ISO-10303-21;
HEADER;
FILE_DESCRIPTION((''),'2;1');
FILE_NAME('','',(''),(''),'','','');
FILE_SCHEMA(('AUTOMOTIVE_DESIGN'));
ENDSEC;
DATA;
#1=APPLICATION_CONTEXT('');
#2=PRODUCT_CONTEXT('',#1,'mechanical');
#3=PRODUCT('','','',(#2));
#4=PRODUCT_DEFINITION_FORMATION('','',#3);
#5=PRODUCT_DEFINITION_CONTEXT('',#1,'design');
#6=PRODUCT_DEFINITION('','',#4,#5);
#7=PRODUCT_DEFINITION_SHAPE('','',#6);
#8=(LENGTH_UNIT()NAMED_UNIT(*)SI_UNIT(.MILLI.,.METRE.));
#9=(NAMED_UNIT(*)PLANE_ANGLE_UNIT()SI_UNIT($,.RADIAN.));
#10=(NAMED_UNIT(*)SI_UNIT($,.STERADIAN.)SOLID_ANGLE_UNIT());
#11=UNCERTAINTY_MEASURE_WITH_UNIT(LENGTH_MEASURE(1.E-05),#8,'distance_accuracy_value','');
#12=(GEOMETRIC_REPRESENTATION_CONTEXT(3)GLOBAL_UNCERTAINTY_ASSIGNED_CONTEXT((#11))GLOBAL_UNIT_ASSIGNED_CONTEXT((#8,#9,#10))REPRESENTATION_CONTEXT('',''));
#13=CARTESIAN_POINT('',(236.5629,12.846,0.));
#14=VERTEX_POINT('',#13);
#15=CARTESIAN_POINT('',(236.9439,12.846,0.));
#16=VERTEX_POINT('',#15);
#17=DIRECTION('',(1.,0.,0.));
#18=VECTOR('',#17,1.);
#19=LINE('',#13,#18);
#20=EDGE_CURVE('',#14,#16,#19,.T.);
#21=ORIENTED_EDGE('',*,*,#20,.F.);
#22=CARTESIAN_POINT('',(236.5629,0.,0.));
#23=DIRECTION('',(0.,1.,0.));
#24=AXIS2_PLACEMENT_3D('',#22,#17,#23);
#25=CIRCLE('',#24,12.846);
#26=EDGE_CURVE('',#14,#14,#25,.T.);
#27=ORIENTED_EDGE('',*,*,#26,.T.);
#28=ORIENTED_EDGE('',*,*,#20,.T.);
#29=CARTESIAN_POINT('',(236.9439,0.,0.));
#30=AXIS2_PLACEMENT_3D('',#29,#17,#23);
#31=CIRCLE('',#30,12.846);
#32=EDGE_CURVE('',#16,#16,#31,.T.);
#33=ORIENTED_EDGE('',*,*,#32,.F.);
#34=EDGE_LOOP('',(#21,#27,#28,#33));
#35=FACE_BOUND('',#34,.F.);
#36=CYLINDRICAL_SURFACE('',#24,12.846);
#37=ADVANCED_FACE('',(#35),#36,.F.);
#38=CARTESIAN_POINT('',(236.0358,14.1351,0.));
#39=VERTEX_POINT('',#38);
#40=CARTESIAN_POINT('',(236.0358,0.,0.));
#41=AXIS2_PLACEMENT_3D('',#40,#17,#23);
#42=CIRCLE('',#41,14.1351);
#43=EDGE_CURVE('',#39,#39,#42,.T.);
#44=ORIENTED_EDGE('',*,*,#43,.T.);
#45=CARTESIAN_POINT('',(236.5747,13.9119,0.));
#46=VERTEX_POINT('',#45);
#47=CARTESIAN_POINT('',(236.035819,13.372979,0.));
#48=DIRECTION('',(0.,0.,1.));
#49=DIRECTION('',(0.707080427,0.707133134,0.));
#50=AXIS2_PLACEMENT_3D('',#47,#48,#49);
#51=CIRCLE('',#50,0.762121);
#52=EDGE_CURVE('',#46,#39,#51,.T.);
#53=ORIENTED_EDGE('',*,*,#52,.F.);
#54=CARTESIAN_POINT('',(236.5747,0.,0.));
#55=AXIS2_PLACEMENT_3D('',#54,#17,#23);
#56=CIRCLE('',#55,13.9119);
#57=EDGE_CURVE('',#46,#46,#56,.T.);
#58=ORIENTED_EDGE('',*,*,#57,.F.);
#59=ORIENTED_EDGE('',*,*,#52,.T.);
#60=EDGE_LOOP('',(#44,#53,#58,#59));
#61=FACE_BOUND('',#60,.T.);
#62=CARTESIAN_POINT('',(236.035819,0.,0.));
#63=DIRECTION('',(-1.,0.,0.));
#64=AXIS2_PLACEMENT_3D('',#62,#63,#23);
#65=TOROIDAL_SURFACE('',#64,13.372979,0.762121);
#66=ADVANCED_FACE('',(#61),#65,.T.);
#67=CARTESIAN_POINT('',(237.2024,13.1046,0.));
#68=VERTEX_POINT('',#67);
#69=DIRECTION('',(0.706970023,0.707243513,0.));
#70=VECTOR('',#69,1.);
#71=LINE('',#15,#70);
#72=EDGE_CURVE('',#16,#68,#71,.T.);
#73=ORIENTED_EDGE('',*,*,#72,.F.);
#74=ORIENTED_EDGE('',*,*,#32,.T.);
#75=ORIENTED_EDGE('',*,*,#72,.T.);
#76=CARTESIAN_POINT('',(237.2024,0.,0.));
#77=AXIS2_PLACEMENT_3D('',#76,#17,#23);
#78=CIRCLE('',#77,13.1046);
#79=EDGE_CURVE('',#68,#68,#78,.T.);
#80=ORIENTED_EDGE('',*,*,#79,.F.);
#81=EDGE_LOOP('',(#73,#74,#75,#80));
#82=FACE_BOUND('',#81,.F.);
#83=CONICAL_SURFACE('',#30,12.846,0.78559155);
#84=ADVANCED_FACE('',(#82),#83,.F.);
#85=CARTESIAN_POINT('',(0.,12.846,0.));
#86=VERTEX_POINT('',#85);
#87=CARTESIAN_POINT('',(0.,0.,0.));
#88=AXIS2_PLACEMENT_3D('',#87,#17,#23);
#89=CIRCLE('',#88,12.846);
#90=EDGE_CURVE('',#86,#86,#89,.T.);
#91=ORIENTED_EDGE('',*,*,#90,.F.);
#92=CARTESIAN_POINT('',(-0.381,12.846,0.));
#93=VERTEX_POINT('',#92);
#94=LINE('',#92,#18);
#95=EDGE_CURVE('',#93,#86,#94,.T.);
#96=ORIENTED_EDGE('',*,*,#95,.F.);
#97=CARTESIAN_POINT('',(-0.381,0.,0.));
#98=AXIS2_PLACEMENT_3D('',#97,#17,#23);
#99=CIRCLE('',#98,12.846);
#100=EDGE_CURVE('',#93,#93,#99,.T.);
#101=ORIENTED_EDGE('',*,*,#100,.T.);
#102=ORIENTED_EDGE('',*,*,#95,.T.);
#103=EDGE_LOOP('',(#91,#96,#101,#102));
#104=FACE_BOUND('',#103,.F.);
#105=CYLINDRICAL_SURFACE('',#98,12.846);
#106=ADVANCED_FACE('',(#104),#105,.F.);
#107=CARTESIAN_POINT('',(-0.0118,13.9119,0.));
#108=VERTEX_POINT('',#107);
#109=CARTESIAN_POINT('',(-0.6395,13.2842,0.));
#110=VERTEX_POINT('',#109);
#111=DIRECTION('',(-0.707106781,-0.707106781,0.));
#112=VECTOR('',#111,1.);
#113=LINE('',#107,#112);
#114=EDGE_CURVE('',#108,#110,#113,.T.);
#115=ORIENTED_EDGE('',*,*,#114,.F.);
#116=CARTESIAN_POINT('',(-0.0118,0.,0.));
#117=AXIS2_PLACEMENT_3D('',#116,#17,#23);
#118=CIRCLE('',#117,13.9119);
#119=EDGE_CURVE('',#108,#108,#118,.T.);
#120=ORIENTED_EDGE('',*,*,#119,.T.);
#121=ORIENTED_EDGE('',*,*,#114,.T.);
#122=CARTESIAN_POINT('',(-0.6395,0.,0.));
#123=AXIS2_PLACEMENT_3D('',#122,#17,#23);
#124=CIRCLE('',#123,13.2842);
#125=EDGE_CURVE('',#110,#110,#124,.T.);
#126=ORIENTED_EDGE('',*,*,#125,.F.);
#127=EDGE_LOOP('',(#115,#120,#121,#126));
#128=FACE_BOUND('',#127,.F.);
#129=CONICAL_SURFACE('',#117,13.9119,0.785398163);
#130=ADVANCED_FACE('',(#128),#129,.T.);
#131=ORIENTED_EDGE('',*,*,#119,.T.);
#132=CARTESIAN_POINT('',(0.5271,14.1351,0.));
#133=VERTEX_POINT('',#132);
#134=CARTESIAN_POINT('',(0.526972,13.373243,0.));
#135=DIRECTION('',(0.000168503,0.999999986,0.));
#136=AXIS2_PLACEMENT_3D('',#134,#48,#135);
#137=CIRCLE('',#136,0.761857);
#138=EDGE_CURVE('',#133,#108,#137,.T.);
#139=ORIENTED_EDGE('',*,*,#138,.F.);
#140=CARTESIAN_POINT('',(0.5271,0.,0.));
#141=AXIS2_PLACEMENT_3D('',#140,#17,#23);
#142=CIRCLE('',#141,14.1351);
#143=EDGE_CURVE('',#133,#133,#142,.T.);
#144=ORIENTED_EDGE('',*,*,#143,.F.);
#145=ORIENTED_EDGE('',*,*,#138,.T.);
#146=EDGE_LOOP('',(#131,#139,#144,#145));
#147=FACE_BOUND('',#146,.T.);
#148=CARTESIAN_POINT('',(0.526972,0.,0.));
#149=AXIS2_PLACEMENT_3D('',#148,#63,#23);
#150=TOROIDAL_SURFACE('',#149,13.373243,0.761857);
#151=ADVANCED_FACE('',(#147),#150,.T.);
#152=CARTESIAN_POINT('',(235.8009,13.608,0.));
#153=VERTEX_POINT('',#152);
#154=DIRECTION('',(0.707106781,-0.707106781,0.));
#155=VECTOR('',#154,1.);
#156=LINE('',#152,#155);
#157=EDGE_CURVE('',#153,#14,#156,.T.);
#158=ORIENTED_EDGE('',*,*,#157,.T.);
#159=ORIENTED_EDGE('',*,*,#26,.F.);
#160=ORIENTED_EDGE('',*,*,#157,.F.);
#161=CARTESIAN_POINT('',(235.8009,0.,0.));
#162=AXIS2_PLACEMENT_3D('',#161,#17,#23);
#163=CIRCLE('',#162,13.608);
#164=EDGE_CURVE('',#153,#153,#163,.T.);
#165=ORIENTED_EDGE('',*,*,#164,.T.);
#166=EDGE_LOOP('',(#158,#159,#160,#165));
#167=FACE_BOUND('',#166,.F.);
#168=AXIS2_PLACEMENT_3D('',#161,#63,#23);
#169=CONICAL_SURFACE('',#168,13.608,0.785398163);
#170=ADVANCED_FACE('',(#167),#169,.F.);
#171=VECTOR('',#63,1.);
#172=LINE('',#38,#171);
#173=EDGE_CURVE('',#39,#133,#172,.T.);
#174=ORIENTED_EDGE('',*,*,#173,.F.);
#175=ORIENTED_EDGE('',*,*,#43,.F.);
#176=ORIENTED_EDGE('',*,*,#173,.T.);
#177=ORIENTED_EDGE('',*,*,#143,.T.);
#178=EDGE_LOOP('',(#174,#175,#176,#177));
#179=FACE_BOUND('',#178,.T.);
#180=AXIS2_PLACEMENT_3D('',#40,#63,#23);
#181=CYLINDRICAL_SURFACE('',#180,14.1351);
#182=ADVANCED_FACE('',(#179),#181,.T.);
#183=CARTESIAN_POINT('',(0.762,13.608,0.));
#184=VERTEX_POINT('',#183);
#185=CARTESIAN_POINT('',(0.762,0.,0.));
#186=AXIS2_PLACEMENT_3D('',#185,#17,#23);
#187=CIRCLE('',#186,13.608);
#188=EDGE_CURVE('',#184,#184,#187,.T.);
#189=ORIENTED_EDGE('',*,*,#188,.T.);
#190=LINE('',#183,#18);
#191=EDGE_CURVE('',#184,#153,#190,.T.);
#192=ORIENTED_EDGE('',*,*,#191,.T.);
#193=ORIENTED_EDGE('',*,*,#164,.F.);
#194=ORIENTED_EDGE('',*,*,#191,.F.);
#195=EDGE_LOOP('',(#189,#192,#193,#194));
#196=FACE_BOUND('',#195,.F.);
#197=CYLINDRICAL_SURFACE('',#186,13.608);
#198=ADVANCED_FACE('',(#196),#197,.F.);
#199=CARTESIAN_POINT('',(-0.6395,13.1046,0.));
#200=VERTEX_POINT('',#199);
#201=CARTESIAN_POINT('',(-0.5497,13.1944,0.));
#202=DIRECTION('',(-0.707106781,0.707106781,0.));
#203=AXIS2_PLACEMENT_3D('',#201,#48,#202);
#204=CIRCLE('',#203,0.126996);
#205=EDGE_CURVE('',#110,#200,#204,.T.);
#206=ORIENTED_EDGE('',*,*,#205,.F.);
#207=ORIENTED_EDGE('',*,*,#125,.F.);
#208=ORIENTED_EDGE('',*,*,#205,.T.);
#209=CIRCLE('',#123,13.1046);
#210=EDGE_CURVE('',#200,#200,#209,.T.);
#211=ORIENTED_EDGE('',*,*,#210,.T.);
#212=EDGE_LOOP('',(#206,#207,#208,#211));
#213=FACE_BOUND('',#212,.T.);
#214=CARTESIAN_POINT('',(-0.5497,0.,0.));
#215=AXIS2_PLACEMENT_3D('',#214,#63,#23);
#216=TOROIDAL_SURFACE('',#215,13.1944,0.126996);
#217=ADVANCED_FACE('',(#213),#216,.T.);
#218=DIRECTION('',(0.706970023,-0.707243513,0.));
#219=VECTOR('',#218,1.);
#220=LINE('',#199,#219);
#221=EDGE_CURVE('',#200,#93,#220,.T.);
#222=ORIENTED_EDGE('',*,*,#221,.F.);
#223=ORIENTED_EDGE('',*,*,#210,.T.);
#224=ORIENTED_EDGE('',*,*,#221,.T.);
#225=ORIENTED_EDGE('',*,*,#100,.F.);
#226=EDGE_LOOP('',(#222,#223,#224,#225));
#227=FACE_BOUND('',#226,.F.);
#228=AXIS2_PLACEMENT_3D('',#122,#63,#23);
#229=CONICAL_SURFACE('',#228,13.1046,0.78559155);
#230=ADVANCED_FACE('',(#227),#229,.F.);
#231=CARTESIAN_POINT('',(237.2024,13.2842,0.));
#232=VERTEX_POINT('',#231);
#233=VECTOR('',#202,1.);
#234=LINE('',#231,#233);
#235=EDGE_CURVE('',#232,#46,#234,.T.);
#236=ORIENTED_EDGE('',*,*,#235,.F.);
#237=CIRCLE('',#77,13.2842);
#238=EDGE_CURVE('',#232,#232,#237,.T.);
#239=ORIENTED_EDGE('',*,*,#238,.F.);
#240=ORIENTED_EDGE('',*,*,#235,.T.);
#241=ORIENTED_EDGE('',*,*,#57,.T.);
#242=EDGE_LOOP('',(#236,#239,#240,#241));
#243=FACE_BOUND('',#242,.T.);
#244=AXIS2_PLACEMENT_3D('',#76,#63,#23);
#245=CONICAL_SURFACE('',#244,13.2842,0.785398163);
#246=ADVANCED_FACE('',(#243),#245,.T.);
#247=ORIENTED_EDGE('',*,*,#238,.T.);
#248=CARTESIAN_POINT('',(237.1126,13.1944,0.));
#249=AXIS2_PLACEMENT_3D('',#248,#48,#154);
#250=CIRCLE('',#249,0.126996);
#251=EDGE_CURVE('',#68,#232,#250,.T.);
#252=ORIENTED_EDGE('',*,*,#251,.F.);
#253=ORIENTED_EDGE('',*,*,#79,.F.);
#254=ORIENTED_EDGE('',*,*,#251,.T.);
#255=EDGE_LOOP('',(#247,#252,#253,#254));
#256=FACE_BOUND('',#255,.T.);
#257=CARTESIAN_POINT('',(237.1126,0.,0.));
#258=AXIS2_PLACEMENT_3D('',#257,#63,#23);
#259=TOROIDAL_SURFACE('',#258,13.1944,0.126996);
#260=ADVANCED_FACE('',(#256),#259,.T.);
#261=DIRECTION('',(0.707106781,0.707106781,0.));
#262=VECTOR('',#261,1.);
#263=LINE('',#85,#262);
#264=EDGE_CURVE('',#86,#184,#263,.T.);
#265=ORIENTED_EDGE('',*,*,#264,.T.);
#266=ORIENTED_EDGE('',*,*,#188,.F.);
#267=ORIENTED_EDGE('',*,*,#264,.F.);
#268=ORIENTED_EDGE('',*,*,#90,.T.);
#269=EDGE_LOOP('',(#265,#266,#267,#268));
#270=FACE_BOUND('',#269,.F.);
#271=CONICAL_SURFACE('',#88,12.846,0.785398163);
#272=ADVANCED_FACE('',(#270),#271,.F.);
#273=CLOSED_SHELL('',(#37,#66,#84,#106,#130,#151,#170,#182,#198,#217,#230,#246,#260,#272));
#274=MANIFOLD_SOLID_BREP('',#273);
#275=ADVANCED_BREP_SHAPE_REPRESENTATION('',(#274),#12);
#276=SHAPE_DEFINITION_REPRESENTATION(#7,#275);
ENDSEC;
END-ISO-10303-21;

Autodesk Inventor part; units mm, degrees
sketch "Sketch_1" plane through (0, 0, 0) normal (0, 0, 1) x (1, 0, 0)
  line L0 (236.5629, 0) -> (0, 0)
  arc A0 (-0.6395, 13.2842) -> (-0.6395, 13.1046) centre (-0.5497, 13.1944) ccw
  line L1 (-0.6395, 13.1046) -> (-0.381, 12.846)
  line L2 (-0.381, 12.846) -> (0, 12.846)
  line L3 (0, 12.846) -> (0.762, 13.608)
  line L4 (0.762, 13.608) -> (235.8009, 13.608)
  line L5 (235.8009, 13.608) -> (236.5629, 12.846)
  line L6 (236.5629, 12.846) -> (236.9439, 12.846)
  line L7 (236.9439, 12.846) -> (237.2024, 13.1046)
  arc A1 (237.2024, 13.1046) -> (237.2024, 13.2842) centre (237.1126, 13.1944) ccw
  line L8 (237.2024, 13.2842) -> (236.5747, 13.9119)
  arc A2 (236.5747, 13.9119) -> (236.0358, 14.1351) centre (236.0359, 13.3731) ccw
  line L9 (236.0358, 14.1351) -> (0.5271, 14.1351)
  arc A3 (0.5271, 14.1351) -> (-0.0118, 13.9119) centre (0.527, 13.3731) ccw
  line L10 (-0.0118, 13.9119) -> (-0.6395, 13.2842)
revolve "Revolution1" add sketch "Sketch_1" angle 360 about axis through (236.5629, 0, 0) along (1, 0, 0)
ref_plane "cp1_XY" through (118.2814, 14.1351, 0) normal (1, 0, 0) x (0, 0, -1)
ref_plane "cp1_YZ" through (118.2814, 14.1351, 0) normal (0, 0, -1) x (0, 1, 0)
ref_plane "cp1_ZX" through (118.2814, 14.1351, 0) normal (0, 1, 0) x (1, 0, 0)
ref_plane "cp2_XY" through (118.2814, 0, -14.1351) normal (1, 0, 0) x (0, 0, -1)
ref_plane "cp2_YZ" through (118.2814, 0, -14.1351) normal (0, 0, -1) x (0, 1, 0)
ref_plane "cp2_ZX" through (118.2814, 0, -14.1351) normal (0, 1, 0) x (1, 0, 0)
ref_plane "cp3_XY" through (118.2814, -14.1351, 0) normal (1, 0, 0) x (0, 0, -1)
ref_plane "cp3_YZ" through (118.2814, -14.1351, 0) normal (0, 0, -1) x (0, 1, 0)
ref_plane "cp3_ZX" through (118.2814, -14.1351, 0) normal (0, 1, 0) x (1, 0, 0)
ref_plane "cp4_XY" through (118.2814, 0, 14.1351) normal (1, 0, 0) x (0, 0, -1)
ref_plane "cp4_YZ" through (118.2814, 0, 14.1351) normal (0, 0, -1) x (0, 1, 0)
ref_plane "cp4_ZX" through (118.2814, 0, 14.1351) normal (0, 1, 0) x (1, 0, 0)
ref_plane "tube_front_XY" through (0, 0, 0) normal (1, 0, 0) x (0, 0, -1)
ref_plane "tube_front_YZ" through (0, 0, 0) normal (0, 0, -1) x (0, 1, 0)
ref_plane "tube_front_ZX" through (0, 0, 0) normal (0, 1, 0) x (1, 0, 0)
ref_plane "tube_rear_XY" through (236.5629, 0, 0) normal (1, 0, 0) x (0, 0, -1)
ref_plane "tube_rear_YZ" through (236.5629, 0, 0) normal (0, 0, -1) x (0, 1, 0)
ref_plane "tube_rear_ZX" through (236.5629, 0, 0) normal (0, 1, 0) x (1, 0, 0)
properties part number "09R-9.31350C"
